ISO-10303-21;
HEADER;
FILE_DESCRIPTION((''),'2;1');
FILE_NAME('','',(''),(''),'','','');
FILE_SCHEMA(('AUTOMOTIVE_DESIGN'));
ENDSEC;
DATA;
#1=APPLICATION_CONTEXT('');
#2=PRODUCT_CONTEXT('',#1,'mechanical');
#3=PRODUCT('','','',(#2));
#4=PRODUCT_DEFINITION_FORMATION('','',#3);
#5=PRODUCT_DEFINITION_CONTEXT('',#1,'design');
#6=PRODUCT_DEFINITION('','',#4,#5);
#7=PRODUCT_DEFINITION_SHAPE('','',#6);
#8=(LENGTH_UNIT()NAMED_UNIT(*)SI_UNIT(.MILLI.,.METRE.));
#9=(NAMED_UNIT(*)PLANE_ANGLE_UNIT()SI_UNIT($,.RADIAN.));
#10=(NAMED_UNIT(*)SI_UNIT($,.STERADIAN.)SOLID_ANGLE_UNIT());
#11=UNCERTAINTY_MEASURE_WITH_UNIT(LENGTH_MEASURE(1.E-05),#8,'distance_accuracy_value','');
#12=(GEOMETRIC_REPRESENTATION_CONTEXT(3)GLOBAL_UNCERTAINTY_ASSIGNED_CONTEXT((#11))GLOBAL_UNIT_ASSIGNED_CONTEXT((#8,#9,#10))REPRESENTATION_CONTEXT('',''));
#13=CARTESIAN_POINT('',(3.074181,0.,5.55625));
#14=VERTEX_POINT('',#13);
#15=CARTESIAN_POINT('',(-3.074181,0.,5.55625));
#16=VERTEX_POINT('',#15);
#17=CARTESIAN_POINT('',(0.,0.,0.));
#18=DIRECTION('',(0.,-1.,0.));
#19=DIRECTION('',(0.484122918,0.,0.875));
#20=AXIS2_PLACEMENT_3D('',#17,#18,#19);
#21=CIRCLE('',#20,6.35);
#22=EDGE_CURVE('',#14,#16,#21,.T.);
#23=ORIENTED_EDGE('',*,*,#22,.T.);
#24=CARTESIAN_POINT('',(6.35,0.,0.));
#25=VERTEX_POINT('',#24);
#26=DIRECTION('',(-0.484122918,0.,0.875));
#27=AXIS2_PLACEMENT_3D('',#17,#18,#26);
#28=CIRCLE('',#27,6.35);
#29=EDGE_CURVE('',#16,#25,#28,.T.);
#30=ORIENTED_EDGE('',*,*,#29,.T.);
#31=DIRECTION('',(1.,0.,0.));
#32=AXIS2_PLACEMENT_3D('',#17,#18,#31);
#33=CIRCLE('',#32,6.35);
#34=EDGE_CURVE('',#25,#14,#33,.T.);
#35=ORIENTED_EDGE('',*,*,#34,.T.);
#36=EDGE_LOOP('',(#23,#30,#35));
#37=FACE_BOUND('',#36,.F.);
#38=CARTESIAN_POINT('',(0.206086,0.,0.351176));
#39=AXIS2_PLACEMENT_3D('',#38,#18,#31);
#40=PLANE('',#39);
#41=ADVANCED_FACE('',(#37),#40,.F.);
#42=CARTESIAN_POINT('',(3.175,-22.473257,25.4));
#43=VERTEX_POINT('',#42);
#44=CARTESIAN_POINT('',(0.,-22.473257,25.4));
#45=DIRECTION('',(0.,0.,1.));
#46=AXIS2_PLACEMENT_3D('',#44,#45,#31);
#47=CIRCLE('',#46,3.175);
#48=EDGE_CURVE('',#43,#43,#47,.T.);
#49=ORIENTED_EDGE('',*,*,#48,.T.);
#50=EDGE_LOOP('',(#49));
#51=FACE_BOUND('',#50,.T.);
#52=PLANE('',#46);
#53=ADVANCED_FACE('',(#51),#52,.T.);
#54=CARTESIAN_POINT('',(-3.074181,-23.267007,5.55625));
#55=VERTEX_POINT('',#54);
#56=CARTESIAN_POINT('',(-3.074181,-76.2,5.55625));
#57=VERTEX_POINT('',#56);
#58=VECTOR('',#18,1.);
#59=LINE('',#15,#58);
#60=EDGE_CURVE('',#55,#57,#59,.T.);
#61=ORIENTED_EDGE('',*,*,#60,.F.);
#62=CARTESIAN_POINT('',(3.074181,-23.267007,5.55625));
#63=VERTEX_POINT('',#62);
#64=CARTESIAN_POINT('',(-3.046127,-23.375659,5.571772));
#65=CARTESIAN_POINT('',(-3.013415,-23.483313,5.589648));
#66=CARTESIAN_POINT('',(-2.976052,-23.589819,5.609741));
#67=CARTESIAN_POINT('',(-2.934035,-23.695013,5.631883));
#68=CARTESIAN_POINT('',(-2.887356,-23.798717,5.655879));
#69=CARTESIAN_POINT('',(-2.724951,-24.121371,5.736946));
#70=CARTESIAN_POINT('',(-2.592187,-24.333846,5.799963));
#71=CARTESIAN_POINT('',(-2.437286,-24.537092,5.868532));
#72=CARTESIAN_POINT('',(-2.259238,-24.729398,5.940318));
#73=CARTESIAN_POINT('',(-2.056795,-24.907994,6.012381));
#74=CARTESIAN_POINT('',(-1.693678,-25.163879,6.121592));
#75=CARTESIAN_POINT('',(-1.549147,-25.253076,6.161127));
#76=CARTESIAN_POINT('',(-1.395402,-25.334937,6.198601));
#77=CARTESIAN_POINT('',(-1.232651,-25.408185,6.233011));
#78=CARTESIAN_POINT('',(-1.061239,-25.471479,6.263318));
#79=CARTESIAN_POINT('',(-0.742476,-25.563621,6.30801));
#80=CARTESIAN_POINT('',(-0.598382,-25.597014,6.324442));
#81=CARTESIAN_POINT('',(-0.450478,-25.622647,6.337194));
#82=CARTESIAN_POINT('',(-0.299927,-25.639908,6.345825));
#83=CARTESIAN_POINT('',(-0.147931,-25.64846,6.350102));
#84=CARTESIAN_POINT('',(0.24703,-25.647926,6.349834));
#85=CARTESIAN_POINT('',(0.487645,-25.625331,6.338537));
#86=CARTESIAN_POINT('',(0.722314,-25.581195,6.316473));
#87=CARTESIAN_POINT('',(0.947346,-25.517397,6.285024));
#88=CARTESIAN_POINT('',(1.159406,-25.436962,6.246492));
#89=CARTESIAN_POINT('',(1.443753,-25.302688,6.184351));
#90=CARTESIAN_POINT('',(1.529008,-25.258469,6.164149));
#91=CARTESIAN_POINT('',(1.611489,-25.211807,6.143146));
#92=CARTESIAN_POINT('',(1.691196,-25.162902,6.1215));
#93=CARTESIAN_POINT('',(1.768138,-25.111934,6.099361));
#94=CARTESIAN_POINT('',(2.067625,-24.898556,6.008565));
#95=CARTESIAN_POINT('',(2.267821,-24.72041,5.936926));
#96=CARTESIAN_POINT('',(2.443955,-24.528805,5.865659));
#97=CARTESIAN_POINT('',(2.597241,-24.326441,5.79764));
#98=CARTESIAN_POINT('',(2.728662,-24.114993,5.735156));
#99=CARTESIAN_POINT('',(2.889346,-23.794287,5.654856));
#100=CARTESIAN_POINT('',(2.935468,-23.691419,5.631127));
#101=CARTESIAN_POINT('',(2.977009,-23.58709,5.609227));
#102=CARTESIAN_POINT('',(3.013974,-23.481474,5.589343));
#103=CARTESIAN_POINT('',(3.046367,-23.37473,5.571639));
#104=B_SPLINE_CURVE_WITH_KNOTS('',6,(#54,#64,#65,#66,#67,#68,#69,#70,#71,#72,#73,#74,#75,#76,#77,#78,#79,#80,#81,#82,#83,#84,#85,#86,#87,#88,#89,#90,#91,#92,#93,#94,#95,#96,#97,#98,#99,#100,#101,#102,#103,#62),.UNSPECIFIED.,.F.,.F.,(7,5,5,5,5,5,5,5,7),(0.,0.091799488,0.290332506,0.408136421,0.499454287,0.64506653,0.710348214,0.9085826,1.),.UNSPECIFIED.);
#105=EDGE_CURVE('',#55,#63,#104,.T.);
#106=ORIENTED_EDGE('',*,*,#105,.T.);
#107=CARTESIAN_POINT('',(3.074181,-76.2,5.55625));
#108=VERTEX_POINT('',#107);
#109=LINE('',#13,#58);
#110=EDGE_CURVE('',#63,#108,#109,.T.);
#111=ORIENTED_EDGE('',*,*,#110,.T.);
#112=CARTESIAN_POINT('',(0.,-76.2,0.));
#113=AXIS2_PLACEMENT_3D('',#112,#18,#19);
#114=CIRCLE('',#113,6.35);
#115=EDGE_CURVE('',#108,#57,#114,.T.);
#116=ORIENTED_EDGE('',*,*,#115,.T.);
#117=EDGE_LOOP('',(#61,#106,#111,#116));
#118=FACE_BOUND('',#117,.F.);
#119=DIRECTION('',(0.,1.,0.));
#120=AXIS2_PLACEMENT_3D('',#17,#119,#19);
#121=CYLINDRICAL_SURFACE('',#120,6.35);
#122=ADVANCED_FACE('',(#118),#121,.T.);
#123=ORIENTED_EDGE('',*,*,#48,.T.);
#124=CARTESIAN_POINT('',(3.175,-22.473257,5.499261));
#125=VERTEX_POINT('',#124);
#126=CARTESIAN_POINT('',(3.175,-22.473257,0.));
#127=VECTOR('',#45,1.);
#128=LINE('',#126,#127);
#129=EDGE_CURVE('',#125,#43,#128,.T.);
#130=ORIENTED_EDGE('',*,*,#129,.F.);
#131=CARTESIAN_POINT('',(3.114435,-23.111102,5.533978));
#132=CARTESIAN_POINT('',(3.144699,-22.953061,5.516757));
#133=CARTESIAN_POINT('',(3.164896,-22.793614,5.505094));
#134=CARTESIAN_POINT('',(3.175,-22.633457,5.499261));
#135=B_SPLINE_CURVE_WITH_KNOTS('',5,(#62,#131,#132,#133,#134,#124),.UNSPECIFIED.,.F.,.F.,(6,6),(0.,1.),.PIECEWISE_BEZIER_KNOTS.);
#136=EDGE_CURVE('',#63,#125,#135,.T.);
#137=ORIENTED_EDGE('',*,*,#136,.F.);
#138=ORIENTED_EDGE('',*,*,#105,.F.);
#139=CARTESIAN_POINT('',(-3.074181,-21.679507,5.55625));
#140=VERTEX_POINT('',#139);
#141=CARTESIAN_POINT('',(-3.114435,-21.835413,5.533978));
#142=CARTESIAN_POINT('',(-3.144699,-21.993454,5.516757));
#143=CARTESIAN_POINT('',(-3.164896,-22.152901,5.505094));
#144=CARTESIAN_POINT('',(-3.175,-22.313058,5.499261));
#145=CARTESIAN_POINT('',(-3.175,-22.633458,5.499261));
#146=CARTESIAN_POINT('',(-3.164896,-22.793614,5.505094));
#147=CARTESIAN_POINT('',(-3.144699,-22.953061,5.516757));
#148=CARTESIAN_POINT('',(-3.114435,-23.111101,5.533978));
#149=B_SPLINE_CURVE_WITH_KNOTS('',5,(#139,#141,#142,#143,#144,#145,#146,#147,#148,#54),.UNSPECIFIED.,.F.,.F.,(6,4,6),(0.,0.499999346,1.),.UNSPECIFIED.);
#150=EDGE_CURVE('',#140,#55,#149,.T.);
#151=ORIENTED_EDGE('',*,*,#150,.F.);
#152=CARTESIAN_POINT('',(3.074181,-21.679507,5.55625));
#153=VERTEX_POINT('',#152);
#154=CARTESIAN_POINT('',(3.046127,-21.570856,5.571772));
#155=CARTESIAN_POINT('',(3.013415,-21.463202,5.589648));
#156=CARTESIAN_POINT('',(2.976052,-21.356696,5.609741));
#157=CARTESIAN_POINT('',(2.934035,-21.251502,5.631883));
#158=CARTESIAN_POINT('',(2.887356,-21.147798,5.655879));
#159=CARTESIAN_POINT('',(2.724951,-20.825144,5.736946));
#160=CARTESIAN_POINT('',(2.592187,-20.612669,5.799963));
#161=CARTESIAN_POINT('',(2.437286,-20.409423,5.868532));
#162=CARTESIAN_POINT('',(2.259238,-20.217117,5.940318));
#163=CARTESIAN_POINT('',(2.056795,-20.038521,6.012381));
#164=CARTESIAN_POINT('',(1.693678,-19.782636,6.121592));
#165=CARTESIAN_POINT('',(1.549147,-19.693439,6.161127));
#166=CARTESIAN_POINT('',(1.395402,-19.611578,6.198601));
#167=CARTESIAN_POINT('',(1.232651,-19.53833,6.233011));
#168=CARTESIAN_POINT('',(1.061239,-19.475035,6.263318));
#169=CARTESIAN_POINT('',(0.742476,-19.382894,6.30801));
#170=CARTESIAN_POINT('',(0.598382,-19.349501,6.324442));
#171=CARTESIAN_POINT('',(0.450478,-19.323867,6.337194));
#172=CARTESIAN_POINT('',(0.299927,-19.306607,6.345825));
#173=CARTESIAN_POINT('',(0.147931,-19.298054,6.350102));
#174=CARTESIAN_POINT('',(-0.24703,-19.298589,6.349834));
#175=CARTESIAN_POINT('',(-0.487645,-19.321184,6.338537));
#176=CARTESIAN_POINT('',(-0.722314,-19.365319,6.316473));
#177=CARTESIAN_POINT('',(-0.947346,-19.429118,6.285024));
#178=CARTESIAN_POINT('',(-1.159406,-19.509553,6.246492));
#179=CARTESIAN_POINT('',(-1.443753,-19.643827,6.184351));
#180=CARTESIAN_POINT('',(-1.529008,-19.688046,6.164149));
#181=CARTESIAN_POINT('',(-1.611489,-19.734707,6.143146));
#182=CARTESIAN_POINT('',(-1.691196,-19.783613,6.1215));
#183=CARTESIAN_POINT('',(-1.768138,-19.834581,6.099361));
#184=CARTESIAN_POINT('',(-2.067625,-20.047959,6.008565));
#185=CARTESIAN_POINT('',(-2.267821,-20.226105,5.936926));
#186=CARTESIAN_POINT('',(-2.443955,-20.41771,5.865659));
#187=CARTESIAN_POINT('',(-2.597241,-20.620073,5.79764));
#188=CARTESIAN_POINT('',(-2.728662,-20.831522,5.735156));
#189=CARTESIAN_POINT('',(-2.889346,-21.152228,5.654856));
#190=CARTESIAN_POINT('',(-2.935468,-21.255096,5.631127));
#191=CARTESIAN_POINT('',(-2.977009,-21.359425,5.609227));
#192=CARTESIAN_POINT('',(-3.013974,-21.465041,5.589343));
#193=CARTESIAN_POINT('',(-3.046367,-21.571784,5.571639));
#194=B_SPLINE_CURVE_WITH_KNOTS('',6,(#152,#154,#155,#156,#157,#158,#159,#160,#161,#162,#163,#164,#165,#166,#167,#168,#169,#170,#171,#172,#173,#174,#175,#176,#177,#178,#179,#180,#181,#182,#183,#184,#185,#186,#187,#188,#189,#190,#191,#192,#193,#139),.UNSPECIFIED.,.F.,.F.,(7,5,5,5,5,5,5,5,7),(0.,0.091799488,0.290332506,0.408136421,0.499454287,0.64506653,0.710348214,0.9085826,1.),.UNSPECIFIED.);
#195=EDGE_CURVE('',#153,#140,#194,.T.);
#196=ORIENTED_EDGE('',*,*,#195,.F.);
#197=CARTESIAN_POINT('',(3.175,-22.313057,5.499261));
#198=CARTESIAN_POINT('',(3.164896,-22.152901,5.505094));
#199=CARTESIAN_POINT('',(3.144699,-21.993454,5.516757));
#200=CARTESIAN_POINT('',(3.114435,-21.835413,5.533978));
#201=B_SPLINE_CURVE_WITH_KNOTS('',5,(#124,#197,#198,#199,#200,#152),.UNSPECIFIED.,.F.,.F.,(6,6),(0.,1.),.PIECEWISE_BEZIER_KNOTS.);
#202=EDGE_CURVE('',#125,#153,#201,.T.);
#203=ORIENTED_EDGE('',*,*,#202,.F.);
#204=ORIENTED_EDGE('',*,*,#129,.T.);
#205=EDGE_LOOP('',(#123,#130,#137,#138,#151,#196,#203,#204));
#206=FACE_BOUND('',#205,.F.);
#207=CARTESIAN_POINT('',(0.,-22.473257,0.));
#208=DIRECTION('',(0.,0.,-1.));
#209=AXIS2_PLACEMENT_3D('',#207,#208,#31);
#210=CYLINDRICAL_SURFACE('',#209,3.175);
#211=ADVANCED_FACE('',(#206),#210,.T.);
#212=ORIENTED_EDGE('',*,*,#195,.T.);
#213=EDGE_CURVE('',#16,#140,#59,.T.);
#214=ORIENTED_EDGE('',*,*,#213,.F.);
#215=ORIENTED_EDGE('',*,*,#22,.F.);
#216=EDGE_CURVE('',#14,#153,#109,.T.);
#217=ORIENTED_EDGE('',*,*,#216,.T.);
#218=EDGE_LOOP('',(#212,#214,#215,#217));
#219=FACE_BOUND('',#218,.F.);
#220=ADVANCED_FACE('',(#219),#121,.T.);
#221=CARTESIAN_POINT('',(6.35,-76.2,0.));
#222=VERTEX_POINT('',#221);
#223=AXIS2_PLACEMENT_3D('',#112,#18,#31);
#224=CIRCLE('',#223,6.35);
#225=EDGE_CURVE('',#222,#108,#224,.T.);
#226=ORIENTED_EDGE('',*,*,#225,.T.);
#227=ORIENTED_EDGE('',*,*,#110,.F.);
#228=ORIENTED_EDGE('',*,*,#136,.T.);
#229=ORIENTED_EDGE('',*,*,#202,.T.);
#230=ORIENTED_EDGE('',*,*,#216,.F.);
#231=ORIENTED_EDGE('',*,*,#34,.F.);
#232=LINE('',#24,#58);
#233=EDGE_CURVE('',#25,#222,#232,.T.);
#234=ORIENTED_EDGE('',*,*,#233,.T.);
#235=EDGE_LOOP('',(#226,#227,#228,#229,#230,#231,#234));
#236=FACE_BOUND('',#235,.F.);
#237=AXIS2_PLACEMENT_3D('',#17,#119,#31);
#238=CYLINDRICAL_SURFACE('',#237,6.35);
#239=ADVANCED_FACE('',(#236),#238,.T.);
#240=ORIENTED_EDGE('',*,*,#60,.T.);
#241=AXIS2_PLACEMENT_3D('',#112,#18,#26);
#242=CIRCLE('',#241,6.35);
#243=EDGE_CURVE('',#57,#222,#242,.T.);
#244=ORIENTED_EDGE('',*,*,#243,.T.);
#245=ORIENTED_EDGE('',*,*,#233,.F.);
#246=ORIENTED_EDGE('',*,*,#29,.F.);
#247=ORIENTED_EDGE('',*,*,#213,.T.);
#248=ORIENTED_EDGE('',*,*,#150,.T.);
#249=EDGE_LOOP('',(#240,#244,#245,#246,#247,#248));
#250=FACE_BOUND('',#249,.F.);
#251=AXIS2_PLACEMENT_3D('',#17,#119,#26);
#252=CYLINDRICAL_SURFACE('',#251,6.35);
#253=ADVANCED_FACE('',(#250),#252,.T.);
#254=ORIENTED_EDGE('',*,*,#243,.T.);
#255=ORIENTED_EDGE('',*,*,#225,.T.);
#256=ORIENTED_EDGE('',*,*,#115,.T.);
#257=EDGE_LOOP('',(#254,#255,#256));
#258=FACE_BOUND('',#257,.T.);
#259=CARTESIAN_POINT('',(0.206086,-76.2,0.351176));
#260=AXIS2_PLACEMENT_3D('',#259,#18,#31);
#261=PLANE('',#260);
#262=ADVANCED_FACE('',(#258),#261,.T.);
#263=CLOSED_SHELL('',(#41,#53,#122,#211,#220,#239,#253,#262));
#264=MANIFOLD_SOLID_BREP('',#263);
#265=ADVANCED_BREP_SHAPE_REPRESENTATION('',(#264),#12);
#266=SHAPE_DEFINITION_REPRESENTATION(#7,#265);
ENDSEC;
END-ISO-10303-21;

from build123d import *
from build123d import SkipClean  # not in build123d's __all__

# Parameters (mm, degrees)
F1_DEPTH = 76.2
F2_R     = 3.175
F3_DEPTH = 25.4


with BuildPart() as f1:
    # F0 (on Front) → F1 (new body)
    with BuildSketch(Plane.XZ):
        with BuildLine():
            ThreePointArc((-3.0741805311, 5.55625), (-3.2250157851, -5.4700798153), (6.35, 0))
            ThreePointArc((6.35, 0), (5.4700798153, 3.2250157851), (3.0741805311, 5.55625))
            ThreePointArc((3.0741805311, 5.55625), (0, 6.35), (-3.0741805311, 5.55625))
        make_face()
    extrude(amount=F1_DEPTH)

    # F2 (on Top) → F3 (join)
    with BuildSketch(Plane.XY):
        with Locations((0, -22.4732574466)):
            Circle(F2_R)
    with SkipClean():  # cleaning this boolean's faces spoils the solid; the shape is the same uncleaned
        extrude(amount=F3_DEPTH)


solid = f1.part
